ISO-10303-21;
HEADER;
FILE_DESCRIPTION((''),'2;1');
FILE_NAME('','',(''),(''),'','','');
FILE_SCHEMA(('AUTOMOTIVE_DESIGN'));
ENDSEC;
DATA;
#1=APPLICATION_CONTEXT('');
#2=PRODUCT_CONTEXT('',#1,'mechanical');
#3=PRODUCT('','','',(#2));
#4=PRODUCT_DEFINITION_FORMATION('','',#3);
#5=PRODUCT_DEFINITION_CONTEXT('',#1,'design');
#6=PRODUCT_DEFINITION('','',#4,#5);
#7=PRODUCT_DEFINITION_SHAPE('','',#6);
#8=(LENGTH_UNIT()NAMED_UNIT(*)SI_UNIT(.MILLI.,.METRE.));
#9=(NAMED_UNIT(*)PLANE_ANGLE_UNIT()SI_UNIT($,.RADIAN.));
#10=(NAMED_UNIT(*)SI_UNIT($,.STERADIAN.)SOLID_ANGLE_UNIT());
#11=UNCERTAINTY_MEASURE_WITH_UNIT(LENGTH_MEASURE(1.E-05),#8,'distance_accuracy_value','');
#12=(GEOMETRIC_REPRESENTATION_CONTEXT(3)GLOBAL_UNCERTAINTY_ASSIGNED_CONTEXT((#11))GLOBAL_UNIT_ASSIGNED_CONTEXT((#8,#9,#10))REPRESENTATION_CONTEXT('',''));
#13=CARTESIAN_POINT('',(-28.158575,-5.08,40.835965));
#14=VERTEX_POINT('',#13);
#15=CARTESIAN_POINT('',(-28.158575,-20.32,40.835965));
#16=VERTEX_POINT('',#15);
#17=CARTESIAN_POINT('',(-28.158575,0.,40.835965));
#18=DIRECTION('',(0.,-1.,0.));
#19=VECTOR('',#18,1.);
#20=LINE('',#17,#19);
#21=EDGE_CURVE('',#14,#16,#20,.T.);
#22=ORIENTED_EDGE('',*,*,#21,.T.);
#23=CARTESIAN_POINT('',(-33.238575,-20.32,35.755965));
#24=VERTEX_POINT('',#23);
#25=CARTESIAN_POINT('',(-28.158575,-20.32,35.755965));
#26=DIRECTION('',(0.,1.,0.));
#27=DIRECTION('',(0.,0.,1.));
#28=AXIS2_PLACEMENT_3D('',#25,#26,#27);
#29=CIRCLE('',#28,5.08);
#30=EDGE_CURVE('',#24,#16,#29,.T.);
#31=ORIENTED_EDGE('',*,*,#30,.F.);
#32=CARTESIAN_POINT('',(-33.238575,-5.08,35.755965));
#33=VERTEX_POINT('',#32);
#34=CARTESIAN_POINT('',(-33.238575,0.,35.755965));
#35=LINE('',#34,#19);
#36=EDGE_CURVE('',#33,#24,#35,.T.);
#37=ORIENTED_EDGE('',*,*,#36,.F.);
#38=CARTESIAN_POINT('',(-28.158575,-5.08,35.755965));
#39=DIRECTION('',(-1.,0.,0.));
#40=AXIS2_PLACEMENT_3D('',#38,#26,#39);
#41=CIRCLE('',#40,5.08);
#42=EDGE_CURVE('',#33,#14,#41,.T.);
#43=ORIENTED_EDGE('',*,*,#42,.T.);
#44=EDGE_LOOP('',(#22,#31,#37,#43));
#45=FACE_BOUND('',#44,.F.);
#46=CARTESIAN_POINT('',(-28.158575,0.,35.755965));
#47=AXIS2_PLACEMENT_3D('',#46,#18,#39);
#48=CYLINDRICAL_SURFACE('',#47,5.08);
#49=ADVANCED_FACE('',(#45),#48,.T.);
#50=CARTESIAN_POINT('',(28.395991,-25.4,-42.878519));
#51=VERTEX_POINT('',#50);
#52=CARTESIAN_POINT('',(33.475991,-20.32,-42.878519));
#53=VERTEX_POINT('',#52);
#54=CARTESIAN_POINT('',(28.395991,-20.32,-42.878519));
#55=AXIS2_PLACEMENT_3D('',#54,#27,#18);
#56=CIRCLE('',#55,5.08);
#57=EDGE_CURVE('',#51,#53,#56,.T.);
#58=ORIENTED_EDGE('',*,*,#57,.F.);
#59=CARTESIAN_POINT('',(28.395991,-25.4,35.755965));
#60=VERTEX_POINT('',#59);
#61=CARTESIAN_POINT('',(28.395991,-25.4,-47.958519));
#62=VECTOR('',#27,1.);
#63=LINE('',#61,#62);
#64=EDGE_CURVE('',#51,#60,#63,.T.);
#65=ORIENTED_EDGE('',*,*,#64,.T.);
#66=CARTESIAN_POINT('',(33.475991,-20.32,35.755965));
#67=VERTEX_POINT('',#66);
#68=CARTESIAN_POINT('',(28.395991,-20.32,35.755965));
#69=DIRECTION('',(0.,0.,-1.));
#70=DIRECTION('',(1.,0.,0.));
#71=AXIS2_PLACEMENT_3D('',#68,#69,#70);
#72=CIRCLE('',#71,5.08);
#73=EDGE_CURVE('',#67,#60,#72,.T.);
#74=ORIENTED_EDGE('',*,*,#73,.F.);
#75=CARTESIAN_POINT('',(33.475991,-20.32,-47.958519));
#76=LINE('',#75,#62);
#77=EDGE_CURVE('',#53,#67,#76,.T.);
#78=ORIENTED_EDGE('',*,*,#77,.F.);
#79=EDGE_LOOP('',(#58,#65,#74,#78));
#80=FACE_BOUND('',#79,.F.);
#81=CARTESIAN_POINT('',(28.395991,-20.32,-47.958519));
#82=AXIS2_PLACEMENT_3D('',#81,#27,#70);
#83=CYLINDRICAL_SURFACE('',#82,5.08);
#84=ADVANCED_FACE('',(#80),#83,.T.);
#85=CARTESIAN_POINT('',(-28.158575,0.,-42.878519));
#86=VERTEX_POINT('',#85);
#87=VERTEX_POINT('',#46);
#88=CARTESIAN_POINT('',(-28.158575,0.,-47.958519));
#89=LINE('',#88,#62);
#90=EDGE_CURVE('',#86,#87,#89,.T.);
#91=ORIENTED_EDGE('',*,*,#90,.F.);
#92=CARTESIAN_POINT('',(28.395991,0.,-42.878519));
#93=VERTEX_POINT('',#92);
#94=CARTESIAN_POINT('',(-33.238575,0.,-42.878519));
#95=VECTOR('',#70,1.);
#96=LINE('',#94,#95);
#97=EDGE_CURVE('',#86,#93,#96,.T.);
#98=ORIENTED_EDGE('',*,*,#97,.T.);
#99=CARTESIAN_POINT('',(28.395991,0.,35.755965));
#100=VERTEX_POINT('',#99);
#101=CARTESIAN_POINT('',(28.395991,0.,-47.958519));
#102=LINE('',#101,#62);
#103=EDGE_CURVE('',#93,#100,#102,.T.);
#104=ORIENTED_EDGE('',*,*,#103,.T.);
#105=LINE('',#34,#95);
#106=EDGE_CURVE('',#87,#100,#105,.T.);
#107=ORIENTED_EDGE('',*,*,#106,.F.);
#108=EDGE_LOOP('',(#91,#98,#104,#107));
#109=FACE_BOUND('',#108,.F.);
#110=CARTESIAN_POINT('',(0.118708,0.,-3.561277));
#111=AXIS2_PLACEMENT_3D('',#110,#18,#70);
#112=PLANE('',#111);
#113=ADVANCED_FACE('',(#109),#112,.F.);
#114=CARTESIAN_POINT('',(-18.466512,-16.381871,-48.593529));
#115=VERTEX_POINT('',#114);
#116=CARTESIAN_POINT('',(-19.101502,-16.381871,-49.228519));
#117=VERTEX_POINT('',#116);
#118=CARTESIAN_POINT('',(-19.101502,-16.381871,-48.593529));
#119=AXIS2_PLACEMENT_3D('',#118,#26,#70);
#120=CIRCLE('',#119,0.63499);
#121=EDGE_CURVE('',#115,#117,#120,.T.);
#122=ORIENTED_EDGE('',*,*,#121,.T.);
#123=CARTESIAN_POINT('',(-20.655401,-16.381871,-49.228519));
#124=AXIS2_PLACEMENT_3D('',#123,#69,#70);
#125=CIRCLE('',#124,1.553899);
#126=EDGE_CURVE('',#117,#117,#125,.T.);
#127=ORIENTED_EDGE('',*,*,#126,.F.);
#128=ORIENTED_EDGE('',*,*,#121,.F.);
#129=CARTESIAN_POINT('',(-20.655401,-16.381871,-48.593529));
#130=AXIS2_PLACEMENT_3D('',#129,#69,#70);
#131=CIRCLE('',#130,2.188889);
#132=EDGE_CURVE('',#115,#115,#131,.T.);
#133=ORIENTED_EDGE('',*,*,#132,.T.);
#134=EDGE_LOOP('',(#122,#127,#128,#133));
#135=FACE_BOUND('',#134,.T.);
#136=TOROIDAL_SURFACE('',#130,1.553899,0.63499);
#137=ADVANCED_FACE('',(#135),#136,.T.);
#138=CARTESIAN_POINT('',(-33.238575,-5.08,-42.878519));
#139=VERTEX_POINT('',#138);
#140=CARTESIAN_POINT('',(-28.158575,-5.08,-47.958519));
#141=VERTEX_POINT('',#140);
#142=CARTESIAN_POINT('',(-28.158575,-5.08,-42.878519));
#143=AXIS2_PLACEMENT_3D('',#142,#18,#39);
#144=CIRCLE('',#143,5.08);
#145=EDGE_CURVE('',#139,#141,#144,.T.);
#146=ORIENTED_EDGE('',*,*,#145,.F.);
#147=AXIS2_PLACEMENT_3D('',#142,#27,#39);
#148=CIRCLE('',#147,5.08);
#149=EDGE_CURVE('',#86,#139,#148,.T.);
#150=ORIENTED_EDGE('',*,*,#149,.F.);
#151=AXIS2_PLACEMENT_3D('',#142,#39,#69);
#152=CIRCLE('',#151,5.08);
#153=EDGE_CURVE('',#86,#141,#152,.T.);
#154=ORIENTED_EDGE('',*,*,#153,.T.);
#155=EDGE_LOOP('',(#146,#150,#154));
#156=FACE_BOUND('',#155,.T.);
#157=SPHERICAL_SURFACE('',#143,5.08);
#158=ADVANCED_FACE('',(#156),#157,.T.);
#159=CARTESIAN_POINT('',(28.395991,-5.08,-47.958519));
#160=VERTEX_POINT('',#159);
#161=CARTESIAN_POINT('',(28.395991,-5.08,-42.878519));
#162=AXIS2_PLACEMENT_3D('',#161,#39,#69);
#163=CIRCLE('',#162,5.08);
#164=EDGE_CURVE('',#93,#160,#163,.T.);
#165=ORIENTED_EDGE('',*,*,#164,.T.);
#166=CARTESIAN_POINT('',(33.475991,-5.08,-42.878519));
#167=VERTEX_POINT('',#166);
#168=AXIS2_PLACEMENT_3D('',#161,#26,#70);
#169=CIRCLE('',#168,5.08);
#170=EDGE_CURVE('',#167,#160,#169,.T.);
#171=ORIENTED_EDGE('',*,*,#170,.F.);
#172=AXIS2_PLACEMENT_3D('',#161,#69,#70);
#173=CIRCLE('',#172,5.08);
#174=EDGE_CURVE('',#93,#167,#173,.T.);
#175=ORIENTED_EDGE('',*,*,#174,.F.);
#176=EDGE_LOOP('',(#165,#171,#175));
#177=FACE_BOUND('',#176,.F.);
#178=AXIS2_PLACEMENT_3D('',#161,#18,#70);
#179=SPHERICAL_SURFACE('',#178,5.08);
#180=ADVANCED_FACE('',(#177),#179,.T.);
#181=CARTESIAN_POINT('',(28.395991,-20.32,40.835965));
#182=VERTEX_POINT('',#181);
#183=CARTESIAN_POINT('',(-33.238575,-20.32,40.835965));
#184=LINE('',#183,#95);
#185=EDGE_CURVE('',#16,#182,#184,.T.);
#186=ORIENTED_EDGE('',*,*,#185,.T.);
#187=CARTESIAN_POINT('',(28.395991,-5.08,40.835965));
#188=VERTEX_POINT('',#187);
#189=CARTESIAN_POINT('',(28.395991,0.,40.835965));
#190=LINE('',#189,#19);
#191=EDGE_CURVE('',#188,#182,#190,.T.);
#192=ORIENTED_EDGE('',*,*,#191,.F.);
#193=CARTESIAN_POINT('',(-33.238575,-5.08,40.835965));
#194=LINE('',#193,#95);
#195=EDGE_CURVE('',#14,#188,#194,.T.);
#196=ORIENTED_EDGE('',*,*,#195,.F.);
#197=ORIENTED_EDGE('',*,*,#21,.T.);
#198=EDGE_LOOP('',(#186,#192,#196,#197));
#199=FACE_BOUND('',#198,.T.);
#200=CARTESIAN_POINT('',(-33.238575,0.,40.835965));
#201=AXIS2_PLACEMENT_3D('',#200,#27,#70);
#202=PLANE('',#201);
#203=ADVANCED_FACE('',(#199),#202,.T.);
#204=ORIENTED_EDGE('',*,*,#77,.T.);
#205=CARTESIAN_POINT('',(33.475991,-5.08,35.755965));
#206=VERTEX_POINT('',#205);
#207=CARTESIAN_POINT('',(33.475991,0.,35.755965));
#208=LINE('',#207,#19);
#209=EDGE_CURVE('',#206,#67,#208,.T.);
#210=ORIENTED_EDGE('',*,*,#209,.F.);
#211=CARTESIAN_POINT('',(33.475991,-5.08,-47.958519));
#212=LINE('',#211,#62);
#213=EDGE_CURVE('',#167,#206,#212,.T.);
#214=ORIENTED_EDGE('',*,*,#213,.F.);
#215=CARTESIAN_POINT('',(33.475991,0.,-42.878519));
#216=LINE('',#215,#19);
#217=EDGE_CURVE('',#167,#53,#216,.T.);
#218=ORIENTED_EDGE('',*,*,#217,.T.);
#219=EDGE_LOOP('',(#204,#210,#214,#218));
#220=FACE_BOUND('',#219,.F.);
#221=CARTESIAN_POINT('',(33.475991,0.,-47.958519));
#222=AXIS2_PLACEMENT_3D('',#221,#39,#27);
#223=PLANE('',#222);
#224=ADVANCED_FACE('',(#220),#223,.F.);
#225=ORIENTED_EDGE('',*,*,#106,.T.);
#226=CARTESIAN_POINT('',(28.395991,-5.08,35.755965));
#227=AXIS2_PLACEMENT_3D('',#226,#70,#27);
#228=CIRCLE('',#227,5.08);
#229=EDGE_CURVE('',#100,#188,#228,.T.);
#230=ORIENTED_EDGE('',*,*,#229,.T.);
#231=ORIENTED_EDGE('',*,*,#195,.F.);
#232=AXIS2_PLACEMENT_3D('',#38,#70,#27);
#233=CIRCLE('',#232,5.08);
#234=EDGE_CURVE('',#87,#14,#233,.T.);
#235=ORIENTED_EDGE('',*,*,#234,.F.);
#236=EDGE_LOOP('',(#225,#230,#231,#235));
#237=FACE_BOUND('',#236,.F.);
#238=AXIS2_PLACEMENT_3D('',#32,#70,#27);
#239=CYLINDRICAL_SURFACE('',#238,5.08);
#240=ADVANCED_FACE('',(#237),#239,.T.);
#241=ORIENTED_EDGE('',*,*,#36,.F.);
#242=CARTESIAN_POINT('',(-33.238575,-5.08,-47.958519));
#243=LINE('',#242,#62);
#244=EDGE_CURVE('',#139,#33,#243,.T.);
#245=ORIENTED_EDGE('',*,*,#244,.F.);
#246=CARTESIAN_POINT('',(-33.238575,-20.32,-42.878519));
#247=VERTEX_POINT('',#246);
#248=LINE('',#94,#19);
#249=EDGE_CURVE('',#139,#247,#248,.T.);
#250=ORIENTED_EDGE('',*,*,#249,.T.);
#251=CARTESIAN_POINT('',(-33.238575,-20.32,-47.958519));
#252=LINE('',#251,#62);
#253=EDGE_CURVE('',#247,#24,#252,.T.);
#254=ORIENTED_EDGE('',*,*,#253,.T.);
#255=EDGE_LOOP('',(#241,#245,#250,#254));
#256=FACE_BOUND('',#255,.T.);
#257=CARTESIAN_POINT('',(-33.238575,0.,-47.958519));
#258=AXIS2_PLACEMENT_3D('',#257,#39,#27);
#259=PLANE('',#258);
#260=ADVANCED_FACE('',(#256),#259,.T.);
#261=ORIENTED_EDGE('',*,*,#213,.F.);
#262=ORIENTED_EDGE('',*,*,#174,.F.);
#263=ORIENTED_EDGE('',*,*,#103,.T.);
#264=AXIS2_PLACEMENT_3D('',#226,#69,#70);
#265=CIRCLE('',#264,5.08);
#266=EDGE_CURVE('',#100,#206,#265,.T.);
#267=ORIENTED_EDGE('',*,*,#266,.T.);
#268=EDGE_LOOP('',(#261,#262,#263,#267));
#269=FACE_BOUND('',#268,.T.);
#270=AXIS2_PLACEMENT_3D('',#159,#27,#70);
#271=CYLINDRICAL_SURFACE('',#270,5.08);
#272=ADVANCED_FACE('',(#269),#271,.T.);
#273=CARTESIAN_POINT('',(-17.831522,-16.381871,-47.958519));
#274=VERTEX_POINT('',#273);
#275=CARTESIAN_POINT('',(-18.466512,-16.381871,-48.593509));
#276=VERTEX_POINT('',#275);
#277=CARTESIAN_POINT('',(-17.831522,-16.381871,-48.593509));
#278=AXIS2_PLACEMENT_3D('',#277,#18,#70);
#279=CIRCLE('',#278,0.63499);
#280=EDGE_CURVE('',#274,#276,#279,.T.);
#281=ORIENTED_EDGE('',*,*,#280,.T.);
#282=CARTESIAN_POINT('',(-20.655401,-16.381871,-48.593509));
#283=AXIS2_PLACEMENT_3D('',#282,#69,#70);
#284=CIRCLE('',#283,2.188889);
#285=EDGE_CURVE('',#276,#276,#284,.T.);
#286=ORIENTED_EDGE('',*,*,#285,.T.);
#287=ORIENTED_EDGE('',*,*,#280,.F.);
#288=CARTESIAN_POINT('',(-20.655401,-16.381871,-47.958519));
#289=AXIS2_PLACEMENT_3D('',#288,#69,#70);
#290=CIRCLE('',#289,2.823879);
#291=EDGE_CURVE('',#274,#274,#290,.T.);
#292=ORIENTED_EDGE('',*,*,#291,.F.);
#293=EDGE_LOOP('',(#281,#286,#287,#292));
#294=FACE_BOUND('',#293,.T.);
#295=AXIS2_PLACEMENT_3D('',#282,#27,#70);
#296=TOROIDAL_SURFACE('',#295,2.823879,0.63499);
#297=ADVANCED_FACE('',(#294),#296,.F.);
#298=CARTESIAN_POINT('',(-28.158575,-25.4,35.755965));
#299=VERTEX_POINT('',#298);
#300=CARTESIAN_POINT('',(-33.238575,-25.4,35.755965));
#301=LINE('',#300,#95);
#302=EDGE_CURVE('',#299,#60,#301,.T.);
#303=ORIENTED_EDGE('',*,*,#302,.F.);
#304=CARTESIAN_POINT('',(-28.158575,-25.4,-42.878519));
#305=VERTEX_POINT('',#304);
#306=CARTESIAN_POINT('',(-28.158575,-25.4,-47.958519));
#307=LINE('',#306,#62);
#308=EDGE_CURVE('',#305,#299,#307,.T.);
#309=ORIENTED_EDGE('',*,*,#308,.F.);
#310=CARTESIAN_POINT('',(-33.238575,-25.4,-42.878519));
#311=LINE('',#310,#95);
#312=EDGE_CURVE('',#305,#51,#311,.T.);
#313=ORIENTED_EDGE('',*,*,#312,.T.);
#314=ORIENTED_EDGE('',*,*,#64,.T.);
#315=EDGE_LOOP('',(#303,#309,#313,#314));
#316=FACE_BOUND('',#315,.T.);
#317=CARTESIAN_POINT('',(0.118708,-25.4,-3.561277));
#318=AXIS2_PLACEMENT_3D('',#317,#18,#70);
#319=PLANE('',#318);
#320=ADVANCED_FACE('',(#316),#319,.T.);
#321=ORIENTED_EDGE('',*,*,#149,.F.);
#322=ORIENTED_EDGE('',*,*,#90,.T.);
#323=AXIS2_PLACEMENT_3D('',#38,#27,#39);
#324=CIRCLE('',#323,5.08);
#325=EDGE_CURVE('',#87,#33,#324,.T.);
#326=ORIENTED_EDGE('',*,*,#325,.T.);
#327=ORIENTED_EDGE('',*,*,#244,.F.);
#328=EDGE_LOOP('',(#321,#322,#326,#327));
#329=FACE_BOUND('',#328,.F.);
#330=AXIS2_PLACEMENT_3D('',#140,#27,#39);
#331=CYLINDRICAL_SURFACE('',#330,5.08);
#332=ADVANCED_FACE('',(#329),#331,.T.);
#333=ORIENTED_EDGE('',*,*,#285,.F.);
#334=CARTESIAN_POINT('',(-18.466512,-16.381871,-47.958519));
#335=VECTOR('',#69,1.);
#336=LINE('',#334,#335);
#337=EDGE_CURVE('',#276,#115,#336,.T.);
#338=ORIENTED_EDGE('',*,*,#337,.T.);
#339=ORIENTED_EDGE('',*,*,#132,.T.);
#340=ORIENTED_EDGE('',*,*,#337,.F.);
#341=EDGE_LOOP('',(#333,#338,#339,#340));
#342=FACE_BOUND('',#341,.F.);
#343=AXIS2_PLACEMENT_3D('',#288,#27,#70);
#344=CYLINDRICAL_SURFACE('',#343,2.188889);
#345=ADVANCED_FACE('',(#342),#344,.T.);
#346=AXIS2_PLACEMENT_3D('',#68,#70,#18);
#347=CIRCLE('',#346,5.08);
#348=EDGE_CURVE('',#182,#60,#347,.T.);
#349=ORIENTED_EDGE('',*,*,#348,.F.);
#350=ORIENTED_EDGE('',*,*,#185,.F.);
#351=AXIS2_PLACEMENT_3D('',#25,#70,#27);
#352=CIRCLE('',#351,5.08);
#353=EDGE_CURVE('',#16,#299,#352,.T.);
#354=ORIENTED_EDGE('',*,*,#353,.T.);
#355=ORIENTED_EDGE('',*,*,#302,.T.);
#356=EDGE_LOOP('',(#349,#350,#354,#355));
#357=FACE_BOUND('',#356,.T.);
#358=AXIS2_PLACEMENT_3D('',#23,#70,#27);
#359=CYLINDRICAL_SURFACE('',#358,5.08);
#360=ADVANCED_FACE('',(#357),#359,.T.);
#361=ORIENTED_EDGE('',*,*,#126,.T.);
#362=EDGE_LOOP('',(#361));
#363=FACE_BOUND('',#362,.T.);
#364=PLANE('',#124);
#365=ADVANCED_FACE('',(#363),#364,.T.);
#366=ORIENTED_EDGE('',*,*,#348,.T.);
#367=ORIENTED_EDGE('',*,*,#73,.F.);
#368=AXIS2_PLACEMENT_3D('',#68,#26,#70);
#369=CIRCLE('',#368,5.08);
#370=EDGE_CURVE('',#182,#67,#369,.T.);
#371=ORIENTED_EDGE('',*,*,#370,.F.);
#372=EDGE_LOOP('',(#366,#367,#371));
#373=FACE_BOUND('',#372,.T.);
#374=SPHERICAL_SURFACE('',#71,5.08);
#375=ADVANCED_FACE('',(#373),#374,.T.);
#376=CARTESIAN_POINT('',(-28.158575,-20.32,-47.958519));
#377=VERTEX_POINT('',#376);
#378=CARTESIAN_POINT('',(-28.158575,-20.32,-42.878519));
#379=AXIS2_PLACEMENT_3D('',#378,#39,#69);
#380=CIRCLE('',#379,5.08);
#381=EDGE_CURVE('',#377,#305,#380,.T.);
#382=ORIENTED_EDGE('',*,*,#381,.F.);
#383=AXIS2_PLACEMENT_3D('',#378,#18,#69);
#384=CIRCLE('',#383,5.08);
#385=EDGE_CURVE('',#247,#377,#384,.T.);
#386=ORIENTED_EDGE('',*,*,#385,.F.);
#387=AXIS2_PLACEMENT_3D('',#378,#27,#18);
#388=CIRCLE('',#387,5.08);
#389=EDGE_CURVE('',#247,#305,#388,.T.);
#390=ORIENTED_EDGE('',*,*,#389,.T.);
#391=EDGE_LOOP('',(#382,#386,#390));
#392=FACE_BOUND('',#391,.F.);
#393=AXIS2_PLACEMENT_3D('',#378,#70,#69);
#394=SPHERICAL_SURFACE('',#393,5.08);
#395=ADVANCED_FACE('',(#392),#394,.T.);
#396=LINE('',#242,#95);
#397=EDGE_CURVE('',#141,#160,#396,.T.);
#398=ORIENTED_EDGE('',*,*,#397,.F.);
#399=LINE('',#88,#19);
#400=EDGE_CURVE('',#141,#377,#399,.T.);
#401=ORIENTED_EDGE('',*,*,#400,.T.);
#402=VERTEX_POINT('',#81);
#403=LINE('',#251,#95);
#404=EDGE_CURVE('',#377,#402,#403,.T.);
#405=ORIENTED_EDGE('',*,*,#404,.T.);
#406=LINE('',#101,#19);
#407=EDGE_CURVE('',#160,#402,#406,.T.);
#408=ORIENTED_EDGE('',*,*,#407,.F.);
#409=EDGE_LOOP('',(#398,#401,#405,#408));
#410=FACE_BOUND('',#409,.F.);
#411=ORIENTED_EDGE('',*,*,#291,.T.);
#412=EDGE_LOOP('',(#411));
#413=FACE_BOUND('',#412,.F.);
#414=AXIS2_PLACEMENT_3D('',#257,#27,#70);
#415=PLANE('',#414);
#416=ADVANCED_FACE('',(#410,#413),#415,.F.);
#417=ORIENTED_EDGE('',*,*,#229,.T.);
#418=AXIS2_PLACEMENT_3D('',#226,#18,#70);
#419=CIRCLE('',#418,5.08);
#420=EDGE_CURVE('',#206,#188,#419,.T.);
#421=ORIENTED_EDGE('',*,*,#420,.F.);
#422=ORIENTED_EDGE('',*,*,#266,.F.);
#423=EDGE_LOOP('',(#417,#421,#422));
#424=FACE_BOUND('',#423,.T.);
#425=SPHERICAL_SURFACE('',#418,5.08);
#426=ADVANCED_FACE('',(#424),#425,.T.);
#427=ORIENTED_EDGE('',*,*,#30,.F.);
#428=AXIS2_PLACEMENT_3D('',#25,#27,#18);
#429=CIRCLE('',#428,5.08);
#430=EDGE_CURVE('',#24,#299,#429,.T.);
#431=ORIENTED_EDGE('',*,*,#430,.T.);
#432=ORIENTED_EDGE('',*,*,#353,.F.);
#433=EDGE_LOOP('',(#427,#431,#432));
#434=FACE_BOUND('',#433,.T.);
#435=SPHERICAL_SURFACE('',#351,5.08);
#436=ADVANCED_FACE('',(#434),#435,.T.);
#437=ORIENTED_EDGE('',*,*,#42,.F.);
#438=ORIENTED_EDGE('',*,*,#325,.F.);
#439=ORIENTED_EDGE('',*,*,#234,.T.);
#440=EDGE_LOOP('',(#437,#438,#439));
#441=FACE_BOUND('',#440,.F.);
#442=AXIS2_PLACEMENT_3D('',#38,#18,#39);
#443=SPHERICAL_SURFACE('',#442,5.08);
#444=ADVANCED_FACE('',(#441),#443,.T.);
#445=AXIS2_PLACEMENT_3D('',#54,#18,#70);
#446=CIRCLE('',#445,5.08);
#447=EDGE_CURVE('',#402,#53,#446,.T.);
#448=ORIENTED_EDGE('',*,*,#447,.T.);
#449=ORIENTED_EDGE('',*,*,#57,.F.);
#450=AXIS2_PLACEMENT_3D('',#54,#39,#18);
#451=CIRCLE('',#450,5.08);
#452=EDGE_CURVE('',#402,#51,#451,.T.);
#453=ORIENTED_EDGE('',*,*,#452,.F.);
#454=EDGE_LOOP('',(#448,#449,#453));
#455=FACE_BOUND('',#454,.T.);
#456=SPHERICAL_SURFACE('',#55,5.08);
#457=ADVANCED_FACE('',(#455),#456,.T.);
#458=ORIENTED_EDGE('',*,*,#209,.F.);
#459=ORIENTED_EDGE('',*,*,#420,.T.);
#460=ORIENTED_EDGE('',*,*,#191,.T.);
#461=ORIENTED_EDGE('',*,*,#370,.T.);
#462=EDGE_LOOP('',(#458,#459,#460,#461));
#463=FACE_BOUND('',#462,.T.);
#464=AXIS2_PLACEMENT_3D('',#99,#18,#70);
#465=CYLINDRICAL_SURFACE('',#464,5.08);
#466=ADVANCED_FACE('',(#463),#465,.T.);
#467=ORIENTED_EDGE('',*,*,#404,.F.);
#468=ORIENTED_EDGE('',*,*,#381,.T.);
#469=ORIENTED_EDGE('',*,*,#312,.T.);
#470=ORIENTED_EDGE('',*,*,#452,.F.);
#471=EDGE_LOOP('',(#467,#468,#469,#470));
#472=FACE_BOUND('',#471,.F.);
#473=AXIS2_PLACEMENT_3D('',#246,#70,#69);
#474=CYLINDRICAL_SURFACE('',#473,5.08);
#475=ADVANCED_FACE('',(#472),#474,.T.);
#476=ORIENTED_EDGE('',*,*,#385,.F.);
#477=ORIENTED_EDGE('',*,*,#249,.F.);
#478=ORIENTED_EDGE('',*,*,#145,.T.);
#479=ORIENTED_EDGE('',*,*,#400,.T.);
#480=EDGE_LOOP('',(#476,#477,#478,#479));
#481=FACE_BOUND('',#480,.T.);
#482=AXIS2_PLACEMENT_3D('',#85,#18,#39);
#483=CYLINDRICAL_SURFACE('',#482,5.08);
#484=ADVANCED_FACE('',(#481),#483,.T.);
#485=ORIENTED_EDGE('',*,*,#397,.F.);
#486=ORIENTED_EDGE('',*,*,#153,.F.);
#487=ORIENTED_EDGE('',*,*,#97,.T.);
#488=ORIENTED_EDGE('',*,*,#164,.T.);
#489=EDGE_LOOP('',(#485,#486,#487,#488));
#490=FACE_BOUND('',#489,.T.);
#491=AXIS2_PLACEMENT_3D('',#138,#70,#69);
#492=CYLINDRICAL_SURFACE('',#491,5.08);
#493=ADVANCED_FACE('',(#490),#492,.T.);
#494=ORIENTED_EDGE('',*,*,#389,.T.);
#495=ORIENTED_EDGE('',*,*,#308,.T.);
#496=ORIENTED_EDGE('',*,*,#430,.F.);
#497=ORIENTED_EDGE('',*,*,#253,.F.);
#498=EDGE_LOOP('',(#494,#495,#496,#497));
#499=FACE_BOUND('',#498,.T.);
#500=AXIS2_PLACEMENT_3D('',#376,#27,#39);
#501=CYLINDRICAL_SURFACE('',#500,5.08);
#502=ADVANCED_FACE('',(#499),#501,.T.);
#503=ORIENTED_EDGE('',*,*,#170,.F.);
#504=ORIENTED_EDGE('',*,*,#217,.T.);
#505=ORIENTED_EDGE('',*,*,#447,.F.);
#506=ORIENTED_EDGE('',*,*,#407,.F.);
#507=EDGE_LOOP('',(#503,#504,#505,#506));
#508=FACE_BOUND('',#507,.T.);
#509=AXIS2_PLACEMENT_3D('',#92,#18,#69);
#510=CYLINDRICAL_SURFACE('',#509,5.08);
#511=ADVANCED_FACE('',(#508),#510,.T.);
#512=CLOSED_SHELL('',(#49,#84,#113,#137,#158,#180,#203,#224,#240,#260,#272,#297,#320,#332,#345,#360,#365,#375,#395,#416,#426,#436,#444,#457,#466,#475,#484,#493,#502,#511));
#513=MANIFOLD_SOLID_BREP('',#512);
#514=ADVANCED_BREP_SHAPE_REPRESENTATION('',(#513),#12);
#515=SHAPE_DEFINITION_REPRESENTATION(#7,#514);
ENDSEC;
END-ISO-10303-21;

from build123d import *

# Parameters (mm, degrees)
F0_W     = 66.714566201
F0_H     = 88.7944847345
F1_DEPTH = 25.4
F2_R     = 5.08
F3_R     = 2.1888893323
F4_DEPTH = 1.27
F5_R     = 0.63499


# Not quite as in the source:
# - a fillet or chamfer is up to 0.001 mm smaller than in the source, because OpenCascade refuses the exact size


with BuildPart() as f1:
    # F0 (on Front) → F1 (new body)
    with BuildSketch(Plane.XZ):
        with Locations((0.118708238, -3.5612769425)):
            Rectangle(F0_W, F0_H)
    extrude(amount=F1_DEPTH)

    # F2
    f2_edges = [f1.edges().sort_by_distance(p)[0] for p in [
        (33.475991, -25.4, -3.561277),
        (0.118708, -25.4, -47.958519),
        (33.475991, -12.7, -47.958519),
        (33.475991, -12.7, 40.835965),
        (33.475991, 0, -3.561277),
        (0.118708, -25.4, 40.835965),
        (-33.238575, -12.7, 40.835965),
        (-33.238575, -12.7, -47.958519),
        (-33.238575, 0, -3.561277),
        (-33.238575, -25.4, -3.561277),
        (0.118708, 0, 40.835965),
        (0.118708, 0, -47.958519),
    ]]
    fillet(f2_edges, radius=F2_R)

    # F3 (on face) → F4 (join)
    with BuildSketch(Plane(origin=(0, 0, -47.9585193098), x_dir=(1, 0, 0), z_dir=(0, 0, -1))):
        with Locations((-20.655401051, 16.3818709552)):
            Circle(F3_R)
    extrude(amount=F4_DEPTH)

    # F5 (radius 0.635 in the source; OpenCascade refuses exactly that, so slightly less here)
    f5_edges = [f1.edges().sort_by_distance(p)[0] for p in [
        (-22.84429, -16.381871, -49.228519),
        (-22.84429, -16.381871, -47.958519),
        (-18.466512, -16.381871, -48.593519),
    ]]
    fillet(f5_edges, radius=F5_R)


solid = f1.part
